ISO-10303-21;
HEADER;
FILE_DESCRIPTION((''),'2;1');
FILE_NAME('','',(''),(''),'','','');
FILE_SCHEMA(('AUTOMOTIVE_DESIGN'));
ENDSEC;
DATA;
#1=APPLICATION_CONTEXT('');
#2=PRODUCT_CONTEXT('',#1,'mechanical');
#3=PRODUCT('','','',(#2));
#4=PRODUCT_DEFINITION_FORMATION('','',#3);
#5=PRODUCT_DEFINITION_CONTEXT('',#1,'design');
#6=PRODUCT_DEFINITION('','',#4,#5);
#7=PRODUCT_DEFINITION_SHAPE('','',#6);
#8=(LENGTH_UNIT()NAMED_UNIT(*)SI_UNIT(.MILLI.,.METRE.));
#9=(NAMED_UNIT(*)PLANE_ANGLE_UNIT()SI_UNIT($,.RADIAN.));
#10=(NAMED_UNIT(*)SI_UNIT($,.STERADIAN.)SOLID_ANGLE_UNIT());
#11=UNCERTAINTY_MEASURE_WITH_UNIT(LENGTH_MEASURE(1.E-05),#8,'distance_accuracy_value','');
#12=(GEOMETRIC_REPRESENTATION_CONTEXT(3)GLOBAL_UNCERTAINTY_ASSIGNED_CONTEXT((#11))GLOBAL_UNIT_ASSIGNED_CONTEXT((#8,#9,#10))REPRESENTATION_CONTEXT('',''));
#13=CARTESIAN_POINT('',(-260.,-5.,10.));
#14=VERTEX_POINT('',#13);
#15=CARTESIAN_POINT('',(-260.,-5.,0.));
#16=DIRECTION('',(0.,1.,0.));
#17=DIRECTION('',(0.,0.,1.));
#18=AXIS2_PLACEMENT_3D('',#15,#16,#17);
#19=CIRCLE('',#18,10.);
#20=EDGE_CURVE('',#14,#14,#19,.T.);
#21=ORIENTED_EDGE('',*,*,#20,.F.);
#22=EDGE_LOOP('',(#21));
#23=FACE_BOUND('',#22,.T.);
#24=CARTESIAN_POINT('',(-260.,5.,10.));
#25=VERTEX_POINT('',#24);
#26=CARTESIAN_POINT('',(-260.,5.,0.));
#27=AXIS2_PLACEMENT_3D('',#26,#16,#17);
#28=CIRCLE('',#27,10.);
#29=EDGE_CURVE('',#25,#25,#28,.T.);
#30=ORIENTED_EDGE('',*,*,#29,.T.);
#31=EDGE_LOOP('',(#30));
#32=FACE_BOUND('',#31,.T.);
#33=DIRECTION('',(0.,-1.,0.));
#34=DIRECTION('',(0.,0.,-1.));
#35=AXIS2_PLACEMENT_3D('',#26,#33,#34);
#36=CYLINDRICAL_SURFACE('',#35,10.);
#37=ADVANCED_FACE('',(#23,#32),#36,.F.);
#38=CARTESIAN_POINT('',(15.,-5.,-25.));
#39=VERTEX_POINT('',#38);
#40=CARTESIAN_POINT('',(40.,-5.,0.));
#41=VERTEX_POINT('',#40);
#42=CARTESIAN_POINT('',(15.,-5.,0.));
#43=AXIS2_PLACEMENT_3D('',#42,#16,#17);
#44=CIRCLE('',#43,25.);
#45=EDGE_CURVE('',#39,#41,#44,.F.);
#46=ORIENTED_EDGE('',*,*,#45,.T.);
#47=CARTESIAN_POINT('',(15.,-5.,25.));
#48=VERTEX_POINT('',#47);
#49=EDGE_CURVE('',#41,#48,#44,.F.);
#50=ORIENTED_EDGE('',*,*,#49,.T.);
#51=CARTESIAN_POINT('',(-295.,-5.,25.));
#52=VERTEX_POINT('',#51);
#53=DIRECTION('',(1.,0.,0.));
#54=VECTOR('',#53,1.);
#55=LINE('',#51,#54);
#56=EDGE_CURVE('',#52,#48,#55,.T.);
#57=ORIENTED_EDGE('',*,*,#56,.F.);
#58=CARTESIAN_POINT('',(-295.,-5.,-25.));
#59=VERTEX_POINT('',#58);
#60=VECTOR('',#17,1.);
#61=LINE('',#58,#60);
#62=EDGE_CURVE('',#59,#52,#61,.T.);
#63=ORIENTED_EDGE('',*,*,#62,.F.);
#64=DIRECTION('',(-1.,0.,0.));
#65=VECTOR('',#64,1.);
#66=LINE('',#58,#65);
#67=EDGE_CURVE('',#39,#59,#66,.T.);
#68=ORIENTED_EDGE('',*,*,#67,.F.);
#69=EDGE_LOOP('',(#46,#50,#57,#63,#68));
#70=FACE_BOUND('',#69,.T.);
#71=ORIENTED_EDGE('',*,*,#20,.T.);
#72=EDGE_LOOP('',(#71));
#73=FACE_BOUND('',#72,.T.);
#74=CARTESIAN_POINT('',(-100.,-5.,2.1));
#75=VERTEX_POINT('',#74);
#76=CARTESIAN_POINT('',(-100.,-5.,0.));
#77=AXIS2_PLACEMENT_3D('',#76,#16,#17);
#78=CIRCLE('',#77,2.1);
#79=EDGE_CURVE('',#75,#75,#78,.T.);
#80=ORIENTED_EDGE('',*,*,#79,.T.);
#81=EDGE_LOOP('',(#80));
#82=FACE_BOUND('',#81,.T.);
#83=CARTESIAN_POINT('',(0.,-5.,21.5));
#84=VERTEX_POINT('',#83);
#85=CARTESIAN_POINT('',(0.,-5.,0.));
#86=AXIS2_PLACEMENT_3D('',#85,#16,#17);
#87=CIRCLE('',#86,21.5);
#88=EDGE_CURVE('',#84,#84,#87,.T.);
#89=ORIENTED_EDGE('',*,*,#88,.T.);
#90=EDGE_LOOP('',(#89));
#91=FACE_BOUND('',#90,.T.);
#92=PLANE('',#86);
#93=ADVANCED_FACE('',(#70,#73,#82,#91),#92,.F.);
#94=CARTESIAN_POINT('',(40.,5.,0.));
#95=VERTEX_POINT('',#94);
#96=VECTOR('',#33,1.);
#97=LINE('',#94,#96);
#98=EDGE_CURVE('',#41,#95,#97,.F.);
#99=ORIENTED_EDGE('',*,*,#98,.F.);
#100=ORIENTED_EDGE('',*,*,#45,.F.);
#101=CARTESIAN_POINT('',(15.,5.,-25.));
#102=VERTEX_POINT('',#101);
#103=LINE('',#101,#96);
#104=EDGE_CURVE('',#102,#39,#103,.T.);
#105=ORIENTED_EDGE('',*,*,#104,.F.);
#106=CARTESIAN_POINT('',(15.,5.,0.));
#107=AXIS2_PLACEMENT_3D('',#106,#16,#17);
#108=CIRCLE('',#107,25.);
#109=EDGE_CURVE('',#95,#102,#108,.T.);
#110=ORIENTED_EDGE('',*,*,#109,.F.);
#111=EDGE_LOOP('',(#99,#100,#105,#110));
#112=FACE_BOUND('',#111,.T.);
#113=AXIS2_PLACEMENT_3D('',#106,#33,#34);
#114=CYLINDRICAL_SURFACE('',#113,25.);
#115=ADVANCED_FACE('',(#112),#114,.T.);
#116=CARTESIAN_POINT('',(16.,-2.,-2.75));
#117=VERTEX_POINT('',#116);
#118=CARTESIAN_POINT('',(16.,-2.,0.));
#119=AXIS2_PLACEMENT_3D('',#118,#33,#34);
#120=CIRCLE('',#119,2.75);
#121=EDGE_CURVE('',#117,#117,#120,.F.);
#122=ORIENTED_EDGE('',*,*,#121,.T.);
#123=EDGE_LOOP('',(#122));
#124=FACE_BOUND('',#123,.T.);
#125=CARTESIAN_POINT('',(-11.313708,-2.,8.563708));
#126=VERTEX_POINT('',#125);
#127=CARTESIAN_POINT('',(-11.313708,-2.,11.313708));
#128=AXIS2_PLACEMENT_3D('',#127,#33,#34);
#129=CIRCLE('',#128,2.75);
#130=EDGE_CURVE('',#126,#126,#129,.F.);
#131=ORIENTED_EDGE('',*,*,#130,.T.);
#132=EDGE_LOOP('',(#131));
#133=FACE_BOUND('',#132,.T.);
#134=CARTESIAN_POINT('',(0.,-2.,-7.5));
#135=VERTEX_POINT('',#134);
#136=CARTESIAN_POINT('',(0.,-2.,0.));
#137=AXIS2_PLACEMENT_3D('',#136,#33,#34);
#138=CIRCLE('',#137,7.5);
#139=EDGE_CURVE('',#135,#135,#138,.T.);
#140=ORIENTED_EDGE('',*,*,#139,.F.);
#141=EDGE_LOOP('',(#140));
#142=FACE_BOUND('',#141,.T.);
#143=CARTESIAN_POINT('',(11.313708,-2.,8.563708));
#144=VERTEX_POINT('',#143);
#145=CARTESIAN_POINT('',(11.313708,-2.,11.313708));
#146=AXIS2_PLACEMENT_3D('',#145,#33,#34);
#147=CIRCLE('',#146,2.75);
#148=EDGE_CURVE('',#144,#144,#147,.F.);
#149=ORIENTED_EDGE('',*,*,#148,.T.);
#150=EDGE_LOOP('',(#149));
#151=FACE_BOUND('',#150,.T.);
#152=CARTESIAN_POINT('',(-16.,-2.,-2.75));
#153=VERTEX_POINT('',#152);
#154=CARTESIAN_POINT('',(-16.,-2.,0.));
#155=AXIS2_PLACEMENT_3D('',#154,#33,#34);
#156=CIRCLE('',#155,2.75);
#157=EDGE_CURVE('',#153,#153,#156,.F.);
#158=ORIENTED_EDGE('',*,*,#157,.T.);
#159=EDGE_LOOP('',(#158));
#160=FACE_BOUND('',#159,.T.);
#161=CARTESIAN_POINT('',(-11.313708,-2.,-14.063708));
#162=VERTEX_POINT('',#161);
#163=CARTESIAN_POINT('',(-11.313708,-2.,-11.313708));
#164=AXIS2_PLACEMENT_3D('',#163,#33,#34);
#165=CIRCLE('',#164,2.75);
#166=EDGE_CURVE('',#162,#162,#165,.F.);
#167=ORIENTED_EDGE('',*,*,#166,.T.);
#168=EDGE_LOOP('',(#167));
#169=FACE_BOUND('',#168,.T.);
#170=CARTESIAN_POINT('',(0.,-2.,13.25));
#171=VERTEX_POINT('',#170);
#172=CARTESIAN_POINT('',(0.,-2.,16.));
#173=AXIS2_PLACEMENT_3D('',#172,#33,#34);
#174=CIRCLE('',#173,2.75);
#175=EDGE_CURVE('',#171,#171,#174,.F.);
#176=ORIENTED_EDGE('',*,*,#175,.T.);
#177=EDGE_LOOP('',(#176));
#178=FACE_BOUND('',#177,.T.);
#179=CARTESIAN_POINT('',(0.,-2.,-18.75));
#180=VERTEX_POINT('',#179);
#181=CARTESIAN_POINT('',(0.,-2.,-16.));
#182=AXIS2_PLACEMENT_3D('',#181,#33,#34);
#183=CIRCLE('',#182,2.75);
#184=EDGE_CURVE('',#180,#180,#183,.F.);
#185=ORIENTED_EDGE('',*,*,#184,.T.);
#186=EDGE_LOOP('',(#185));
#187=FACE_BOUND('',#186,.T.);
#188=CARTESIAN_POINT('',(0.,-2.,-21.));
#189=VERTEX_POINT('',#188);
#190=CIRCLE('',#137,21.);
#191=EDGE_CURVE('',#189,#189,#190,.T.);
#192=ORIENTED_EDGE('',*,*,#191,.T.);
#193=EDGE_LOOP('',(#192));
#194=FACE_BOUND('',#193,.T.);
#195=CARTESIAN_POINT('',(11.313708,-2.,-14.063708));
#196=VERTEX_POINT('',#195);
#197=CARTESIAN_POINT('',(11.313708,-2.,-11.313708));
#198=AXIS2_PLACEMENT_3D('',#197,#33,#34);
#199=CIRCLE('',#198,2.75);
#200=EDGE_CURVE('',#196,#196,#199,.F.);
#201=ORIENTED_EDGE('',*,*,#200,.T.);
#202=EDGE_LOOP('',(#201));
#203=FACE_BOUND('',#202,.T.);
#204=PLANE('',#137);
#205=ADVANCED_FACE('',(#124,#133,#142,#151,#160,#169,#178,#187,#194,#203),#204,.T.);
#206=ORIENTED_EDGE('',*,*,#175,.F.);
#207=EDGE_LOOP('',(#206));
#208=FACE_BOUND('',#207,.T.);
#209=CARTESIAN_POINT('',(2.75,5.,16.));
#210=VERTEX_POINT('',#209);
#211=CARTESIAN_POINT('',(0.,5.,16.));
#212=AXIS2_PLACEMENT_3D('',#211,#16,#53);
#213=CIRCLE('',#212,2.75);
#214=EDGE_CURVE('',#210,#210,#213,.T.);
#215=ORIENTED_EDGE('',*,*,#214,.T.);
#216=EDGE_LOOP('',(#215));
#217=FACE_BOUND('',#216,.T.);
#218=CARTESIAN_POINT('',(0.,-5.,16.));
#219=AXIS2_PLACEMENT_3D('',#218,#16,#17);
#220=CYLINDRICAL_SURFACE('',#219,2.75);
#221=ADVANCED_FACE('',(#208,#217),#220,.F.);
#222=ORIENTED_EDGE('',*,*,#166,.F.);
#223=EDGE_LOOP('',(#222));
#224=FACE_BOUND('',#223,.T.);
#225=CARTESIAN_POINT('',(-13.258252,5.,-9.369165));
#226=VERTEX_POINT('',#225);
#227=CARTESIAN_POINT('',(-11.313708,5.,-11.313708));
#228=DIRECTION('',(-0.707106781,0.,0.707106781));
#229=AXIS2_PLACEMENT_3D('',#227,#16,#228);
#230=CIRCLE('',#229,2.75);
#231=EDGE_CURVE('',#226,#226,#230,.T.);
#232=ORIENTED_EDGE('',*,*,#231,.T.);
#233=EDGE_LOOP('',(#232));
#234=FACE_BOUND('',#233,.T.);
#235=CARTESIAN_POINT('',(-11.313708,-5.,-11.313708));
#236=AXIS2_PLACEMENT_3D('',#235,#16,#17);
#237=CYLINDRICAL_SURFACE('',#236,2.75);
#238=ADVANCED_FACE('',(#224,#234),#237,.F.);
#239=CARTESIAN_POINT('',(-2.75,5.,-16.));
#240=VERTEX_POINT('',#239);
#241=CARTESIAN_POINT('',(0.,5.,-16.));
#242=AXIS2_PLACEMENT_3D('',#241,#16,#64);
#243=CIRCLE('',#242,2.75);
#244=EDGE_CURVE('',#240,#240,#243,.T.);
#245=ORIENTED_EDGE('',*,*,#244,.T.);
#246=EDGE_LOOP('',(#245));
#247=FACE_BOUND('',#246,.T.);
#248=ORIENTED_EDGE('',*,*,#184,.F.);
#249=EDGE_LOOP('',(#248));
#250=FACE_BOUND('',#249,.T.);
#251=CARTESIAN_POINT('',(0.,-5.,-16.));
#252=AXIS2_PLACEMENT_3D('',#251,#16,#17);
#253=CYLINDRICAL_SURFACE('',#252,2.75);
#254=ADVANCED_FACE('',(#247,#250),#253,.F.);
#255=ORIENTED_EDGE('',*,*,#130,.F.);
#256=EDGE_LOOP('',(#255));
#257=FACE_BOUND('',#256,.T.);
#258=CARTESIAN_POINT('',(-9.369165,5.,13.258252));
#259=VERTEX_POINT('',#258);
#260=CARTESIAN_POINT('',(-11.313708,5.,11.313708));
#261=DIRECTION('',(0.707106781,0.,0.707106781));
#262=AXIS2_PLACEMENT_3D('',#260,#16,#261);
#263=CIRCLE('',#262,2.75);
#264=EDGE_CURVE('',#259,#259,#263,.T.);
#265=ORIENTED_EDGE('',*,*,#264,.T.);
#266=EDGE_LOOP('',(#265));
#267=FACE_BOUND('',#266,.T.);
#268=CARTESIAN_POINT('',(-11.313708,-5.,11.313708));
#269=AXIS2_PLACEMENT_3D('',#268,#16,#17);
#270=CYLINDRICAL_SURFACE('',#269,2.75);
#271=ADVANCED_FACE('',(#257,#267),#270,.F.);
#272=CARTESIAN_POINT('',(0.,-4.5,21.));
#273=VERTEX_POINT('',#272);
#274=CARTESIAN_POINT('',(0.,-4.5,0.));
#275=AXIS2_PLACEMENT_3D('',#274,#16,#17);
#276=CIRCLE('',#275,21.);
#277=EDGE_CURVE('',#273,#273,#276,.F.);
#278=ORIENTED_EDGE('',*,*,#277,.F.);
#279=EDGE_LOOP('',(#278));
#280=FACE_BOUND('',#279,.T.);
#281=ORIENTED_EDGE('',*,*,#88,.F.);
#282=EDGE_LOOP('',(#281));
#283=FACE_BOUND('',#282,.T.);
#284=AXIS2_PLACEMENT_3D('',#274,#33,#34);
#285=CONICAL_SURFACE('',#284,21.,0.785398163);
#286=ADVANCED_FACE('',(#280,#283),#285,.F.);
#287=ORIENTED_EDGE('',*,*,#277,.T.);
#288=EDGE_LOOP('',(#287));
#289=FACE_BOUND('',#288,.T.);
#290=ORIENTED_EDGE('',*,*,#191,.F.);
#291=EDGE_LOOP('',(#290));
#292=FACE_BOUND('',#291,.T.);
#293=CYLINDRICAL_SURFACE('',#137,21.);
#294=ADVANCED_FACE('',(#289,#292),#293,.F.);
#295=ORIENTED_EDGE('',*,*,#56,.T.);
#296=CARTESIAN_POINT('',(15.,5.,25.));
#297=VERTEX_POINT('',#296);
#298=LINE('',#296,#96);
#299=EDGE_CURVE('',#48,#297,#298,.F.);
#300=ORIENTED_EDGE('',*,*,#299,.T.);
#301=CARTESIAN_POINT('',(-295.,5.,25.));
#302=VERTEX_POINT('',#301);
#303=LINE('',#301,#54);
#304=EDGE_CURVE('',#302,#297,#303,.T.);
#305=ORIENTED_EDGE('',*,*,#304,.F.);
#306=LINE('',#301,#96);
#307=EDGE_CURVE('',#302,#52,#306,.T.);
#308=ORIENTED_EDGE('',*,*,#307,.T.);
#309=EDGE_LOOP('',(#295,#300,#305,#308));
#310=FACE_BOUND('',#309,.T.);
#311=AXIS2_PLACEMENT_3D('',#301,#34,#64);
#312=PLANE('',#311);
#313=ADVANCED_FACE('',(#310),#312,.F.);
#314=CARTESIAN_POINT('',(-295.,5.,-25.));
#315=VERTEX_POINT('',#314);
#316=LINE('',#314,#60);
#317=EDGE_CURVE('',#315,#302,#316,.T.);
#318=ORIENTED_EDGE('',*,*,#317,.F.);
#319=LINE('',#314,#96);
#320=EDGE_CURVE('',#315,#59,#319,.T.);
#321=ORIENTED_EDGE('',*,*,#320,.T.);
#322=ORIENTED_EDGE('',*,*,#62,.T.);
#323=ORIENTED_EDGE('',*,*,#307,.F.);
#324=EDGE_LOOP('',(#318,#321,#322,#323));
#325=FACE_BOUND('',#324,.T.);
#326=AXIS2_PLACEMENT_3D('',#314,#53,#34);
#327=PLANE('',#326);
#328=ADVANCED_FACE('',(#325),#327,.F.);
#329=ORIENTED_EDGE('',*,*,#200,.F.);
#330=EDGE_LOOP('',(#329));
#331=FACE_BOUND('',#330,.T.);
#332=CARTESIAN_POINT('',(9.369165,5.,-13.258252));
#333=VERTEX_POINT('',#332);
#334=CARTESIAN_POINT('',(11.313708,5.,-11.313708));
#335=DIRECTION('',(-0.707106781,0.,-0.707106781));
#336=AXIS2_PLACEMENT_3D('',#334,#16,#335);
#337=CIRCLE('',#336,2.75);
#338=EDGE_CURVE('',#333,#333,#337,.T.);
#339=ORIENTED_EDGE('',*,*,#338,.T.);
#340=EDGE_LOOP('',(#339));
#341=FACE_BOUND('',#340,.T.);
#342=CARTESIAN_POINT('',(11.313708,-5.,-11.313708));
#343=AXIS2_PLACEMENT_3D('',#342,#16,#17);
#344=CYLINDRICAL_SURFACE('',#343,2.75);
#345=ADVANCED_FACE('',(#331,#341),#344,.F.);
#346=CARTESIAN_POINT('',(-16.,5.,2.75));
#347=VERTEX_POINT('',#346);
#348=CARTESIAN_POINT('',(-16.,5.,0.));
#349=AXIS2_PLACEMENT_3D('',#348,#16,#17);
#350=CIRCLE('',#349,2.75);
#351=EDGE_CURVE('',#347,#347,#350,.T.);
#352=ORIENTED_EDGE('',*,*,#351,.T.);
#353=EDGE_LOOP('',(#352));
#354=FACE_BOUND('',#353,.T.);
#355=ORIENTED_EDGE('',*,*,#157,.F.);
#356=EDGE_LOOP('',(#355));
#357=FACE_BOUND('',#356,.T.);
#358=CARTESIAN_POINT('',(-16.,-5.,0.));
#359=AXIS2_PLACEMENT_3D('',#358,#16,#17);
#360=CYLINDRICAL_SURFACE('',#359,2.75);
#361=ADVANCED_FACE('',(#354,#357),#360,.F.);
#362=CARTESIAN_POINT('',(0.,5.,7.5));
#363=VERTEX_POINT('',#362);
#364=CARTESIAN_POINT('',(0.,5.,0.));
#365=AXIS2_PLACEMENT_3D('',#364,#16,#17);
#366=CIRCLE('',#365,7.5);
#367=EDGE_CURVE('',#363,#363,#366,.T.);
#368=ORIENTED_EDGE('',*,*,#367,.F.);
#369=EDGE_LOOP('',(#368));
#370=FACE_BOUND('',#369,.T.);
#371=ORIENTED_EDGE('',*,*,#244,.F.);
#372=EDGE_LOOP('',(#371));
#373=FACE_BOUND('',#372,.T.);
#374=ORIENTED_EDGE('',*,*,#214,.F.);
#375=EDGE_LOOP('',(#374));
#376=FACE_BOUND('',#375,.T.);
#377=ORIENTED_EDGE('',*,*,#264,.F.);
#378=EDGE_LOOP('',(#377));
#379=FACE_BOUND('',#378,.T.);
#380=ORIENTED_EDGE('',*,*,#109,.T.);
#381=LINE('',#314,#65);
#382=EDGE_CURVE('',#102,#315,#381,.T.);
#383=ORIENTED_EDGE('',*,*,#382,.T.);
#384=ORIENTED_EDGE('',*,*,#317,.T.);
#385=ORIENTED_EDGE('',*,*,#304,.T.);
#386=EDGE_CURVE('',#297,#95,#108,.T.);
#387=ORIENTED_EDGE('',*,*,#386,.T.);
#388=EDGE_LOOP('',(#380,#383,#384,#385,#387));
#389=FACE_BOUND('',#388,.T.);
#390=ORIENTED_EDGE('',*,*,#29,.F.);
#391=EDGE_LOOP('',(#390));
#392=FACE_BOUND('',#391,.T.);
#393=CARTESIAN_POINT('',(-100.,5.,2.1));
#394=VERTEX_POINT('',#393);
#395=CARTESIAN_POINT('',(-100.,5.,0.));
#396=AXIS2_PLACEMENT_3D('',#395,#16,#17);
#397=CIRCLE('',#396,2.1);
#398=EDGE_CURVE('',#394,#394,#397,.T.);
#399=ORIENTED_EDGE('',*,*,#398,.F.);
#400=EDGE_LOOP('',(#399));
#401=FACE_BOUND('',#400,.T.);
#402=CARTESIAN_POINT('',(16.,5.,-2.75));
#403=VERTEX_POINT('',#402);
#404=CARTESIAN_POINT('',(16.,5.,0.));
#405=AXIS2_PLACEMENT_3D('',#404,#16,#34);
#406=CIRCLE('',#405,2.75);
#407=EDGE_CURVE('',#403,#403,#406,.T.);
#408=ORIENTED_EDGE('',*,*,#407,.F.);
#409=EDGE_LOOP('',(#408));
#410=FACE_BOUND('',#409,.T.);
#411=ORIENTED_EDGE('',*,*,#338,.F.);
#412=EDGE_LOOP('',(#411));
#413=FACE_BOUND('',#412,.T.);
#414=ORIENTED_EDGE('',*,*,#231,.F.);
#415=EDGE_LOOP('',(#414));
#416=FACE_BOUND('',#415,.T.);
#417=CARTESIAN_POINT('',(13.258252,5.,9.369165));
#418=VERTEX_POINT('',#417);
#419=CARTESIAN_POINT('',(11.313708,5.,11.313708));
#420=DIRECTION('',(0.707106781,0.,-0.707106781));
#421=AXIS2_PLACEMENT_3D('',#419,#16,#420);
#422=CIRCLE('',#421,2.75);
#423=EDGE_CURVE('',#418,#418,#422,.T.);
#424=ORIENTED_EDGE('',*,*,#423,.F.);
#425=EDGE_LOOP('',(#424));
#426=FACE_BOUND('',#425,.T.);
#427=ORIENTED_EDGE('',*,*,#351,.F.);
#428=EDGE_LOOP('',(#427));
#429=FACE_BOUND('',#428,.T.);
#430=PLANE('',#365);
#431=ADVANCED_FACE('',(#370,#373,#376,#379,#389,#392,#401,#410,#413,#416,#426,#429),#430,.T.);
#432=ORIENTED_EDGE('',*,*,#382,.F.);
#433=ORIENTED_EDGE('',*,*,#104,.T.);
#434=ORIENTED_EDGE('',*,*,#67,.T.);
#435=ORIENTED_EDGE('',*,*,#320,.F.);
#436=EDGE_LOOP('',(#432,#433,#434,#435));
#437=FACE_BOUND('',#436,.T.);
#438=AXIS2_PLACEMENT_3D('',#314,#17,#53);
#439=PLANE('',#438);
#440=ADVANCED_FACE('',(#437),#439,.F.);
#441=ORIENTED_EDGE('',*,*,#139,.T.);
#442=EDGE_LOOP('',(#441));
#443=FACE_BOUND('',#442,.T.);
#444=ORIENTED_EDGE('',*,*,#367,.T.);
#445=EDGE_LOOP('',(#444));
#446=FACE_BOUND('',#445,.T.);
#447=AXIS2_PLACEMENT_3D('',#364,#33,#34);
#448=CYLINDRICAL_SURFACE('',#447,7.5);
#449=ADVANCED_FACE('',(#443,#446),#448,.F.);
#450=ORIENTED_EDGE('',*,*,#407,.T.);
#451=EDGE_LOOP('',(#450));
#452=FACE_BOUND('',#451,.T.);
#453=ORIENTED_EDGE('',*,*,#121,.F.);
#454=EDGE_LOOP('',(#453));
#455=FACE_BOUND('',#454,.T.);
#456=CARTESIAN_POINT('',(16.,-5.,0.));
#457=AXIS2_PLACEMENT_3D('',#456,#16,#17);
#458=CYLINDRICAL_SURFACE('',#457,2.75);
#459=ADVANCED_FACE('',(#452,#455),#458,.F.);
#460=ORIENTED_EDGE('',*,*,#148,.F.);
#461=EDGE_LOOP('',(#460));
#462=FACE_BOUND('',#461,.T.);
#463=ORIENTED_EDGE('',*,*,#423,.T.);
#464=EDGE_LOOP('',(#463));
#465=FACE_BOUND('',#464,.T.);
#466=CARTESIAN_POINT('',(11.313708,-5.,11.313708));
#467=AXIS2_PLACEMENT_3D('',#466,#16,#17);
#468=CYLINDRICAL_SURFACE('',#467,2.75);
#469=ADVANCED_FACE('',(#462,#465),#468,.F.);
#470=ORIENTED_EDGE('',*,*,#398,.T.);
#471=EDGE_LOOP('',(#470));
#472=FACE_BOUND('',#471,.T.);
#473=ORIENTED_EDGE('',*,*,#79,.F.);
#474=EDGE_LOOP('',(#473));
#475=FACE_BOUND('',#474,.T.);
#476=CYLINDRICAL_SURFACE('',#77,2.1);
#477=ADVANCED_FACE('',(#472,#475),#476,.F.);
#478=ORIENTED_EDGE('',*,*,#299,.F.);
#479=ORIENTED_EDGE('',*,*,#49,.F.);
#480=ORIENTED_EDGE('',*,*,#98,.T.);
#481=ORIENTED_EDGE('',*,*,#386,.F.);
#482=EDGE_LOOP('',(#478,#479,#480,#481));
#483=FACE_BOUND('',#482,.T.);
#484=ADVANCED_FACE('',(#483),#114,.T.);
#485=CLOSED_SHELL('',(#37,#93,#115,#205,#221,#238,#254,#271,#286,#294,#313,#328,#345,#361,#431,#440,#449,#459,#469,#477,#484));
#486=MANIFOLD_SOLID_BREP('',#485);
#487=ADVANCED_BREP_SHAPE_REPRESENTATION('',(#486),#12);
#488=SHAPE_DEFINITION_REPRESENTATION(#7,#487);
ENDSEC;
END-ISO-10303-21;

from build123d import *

# Parameters (mm, degrees)
SCHIZZO1_W                   = 335
SCHIZZO1_H                   = 50
SCHIZZO1_R                   = 7.5
SCHIZZO1_R_2                 = 10
ESTRUSIONE_ESTRUSIONE1_DEPTH = 5
SCHIZZO2_R                   = 2.75
TAGLIO_ESTRUSIONE1_DEPTH     = 297.226264872
RIPETIZIONECIRCOLARE1_COUNT  = 8
RACCORDO1_R                  = 25
SCHIZZO3_R                   = 2.1
TAGLIO_ESTRUSIONE2_DEPTH     = 297.226264872
SCHIZZO4_R                   = 21
TAGLIO_ESTRUSIONE3_DEPTH     = 3
SMUSSO1_SIZE                 = 0.5


with BuildPart() as part:
    # Schizzo1 → Estrusione-Estrusione1 (new, symmetric)
    with BuildSketch(Plane(origin=(0, 0, 0), x_dir=(1, 0, 0), z_dir=(0, 1, 0))):
        with Locations((-127.5, 0)):
            Rectangle(SCHIZZO1_W, SCHIZZO1_H)
        with Locations(Location((0, 0, 0), (0, 0, 270))):
            Circle(SCHIZZO1_R, mode=Mode.SUBTRACT)
        with Locations(Location((-260, 0, 0), (0, 0, 270))):
            Circle(SCHIZZO1_R_2, mode=Mode.SUBTRACT)
    extrude(amount=ESTRUSIONE_ESTRUSIONE1_DEPTH, both=True)

    # Schizzo2 → Taglio-Estrusione1 (cut, through all)
    with BuildSketch(Plane(origin=(0, 5, 0), x_dir=(1, 0, 0), z_dir=(0, 1, 0))):
        with Locations(Location((-16, 0, 0), (0, 0, 270))):
            Circle(SCHIZZO2_R)
    taglio_estrusione1 = extrude(amount=-TAGLIO_ESTRUSIONE1_DEPTH, mode=Mode.SUBTRACT)

    # RipetizioneCircolare1: Taglio-Estrusione1 ×8 about axis
    ripetizionecircolare1_axis = Axis((0, 0, 0), (0, 1, 0))
    for i in range(1, RIPETIZIONECIRCOLARE1_COUNT):
        add(taglio_estrusione1.rotate(ripetizionecircolare1_axis, i * 360 / RIPETIZIONECIRCOLARE1_COUNT), mode=Mode.SUBTRACT)

    # Raccordo1
    raccordo1_edges = [part.edges().sort_by_distance(p)[0] for p in [
        (40, 0, 25),
        (40, 0, -25),
    ]]
    fillet(raccordo1_edges, radius=RACCORDO1_R - 0.0001)  # a hair under: the kernel refuses the full size

    # Schizzo3 → Taglio-Estrusione2 (cut, through all)
    with BuildSketch(Plane(origin=(0, 5, 0), x_dir=(1, 0, 0), z_dir=(0, 1, 0))):
        with Locations(Location((-100, 0, 0), (0, 0, 270))):
            Circle(SCHIZZO3_R)
    extrude(amount=-TAGLIO_ESTRUSIONE2_DEPTH, mode=Mode.SUBTRACT)

    # Schizzo4 → Taglio-Estrusione3 (cut)
    with BuildSketch(Plane.XZ.offset(5)):
        with Locations(Location((0, 0, 0), (0, 0, 270))):
            Circle(SCHIZZO4_R)
    extrude(amount=-TAGLIO_ESTRUSIONE3_DEPTH, mode=Mode.SUBTRACT)

    # Smusso1
    smusso1_edges = [part.edges().sort_by_distance(p)[0] for p in [
        (0, -5, 21),
    ]]
    chamfer(smusso1_edges, length=SMUSSO1_SIZE)


solid = part.part
